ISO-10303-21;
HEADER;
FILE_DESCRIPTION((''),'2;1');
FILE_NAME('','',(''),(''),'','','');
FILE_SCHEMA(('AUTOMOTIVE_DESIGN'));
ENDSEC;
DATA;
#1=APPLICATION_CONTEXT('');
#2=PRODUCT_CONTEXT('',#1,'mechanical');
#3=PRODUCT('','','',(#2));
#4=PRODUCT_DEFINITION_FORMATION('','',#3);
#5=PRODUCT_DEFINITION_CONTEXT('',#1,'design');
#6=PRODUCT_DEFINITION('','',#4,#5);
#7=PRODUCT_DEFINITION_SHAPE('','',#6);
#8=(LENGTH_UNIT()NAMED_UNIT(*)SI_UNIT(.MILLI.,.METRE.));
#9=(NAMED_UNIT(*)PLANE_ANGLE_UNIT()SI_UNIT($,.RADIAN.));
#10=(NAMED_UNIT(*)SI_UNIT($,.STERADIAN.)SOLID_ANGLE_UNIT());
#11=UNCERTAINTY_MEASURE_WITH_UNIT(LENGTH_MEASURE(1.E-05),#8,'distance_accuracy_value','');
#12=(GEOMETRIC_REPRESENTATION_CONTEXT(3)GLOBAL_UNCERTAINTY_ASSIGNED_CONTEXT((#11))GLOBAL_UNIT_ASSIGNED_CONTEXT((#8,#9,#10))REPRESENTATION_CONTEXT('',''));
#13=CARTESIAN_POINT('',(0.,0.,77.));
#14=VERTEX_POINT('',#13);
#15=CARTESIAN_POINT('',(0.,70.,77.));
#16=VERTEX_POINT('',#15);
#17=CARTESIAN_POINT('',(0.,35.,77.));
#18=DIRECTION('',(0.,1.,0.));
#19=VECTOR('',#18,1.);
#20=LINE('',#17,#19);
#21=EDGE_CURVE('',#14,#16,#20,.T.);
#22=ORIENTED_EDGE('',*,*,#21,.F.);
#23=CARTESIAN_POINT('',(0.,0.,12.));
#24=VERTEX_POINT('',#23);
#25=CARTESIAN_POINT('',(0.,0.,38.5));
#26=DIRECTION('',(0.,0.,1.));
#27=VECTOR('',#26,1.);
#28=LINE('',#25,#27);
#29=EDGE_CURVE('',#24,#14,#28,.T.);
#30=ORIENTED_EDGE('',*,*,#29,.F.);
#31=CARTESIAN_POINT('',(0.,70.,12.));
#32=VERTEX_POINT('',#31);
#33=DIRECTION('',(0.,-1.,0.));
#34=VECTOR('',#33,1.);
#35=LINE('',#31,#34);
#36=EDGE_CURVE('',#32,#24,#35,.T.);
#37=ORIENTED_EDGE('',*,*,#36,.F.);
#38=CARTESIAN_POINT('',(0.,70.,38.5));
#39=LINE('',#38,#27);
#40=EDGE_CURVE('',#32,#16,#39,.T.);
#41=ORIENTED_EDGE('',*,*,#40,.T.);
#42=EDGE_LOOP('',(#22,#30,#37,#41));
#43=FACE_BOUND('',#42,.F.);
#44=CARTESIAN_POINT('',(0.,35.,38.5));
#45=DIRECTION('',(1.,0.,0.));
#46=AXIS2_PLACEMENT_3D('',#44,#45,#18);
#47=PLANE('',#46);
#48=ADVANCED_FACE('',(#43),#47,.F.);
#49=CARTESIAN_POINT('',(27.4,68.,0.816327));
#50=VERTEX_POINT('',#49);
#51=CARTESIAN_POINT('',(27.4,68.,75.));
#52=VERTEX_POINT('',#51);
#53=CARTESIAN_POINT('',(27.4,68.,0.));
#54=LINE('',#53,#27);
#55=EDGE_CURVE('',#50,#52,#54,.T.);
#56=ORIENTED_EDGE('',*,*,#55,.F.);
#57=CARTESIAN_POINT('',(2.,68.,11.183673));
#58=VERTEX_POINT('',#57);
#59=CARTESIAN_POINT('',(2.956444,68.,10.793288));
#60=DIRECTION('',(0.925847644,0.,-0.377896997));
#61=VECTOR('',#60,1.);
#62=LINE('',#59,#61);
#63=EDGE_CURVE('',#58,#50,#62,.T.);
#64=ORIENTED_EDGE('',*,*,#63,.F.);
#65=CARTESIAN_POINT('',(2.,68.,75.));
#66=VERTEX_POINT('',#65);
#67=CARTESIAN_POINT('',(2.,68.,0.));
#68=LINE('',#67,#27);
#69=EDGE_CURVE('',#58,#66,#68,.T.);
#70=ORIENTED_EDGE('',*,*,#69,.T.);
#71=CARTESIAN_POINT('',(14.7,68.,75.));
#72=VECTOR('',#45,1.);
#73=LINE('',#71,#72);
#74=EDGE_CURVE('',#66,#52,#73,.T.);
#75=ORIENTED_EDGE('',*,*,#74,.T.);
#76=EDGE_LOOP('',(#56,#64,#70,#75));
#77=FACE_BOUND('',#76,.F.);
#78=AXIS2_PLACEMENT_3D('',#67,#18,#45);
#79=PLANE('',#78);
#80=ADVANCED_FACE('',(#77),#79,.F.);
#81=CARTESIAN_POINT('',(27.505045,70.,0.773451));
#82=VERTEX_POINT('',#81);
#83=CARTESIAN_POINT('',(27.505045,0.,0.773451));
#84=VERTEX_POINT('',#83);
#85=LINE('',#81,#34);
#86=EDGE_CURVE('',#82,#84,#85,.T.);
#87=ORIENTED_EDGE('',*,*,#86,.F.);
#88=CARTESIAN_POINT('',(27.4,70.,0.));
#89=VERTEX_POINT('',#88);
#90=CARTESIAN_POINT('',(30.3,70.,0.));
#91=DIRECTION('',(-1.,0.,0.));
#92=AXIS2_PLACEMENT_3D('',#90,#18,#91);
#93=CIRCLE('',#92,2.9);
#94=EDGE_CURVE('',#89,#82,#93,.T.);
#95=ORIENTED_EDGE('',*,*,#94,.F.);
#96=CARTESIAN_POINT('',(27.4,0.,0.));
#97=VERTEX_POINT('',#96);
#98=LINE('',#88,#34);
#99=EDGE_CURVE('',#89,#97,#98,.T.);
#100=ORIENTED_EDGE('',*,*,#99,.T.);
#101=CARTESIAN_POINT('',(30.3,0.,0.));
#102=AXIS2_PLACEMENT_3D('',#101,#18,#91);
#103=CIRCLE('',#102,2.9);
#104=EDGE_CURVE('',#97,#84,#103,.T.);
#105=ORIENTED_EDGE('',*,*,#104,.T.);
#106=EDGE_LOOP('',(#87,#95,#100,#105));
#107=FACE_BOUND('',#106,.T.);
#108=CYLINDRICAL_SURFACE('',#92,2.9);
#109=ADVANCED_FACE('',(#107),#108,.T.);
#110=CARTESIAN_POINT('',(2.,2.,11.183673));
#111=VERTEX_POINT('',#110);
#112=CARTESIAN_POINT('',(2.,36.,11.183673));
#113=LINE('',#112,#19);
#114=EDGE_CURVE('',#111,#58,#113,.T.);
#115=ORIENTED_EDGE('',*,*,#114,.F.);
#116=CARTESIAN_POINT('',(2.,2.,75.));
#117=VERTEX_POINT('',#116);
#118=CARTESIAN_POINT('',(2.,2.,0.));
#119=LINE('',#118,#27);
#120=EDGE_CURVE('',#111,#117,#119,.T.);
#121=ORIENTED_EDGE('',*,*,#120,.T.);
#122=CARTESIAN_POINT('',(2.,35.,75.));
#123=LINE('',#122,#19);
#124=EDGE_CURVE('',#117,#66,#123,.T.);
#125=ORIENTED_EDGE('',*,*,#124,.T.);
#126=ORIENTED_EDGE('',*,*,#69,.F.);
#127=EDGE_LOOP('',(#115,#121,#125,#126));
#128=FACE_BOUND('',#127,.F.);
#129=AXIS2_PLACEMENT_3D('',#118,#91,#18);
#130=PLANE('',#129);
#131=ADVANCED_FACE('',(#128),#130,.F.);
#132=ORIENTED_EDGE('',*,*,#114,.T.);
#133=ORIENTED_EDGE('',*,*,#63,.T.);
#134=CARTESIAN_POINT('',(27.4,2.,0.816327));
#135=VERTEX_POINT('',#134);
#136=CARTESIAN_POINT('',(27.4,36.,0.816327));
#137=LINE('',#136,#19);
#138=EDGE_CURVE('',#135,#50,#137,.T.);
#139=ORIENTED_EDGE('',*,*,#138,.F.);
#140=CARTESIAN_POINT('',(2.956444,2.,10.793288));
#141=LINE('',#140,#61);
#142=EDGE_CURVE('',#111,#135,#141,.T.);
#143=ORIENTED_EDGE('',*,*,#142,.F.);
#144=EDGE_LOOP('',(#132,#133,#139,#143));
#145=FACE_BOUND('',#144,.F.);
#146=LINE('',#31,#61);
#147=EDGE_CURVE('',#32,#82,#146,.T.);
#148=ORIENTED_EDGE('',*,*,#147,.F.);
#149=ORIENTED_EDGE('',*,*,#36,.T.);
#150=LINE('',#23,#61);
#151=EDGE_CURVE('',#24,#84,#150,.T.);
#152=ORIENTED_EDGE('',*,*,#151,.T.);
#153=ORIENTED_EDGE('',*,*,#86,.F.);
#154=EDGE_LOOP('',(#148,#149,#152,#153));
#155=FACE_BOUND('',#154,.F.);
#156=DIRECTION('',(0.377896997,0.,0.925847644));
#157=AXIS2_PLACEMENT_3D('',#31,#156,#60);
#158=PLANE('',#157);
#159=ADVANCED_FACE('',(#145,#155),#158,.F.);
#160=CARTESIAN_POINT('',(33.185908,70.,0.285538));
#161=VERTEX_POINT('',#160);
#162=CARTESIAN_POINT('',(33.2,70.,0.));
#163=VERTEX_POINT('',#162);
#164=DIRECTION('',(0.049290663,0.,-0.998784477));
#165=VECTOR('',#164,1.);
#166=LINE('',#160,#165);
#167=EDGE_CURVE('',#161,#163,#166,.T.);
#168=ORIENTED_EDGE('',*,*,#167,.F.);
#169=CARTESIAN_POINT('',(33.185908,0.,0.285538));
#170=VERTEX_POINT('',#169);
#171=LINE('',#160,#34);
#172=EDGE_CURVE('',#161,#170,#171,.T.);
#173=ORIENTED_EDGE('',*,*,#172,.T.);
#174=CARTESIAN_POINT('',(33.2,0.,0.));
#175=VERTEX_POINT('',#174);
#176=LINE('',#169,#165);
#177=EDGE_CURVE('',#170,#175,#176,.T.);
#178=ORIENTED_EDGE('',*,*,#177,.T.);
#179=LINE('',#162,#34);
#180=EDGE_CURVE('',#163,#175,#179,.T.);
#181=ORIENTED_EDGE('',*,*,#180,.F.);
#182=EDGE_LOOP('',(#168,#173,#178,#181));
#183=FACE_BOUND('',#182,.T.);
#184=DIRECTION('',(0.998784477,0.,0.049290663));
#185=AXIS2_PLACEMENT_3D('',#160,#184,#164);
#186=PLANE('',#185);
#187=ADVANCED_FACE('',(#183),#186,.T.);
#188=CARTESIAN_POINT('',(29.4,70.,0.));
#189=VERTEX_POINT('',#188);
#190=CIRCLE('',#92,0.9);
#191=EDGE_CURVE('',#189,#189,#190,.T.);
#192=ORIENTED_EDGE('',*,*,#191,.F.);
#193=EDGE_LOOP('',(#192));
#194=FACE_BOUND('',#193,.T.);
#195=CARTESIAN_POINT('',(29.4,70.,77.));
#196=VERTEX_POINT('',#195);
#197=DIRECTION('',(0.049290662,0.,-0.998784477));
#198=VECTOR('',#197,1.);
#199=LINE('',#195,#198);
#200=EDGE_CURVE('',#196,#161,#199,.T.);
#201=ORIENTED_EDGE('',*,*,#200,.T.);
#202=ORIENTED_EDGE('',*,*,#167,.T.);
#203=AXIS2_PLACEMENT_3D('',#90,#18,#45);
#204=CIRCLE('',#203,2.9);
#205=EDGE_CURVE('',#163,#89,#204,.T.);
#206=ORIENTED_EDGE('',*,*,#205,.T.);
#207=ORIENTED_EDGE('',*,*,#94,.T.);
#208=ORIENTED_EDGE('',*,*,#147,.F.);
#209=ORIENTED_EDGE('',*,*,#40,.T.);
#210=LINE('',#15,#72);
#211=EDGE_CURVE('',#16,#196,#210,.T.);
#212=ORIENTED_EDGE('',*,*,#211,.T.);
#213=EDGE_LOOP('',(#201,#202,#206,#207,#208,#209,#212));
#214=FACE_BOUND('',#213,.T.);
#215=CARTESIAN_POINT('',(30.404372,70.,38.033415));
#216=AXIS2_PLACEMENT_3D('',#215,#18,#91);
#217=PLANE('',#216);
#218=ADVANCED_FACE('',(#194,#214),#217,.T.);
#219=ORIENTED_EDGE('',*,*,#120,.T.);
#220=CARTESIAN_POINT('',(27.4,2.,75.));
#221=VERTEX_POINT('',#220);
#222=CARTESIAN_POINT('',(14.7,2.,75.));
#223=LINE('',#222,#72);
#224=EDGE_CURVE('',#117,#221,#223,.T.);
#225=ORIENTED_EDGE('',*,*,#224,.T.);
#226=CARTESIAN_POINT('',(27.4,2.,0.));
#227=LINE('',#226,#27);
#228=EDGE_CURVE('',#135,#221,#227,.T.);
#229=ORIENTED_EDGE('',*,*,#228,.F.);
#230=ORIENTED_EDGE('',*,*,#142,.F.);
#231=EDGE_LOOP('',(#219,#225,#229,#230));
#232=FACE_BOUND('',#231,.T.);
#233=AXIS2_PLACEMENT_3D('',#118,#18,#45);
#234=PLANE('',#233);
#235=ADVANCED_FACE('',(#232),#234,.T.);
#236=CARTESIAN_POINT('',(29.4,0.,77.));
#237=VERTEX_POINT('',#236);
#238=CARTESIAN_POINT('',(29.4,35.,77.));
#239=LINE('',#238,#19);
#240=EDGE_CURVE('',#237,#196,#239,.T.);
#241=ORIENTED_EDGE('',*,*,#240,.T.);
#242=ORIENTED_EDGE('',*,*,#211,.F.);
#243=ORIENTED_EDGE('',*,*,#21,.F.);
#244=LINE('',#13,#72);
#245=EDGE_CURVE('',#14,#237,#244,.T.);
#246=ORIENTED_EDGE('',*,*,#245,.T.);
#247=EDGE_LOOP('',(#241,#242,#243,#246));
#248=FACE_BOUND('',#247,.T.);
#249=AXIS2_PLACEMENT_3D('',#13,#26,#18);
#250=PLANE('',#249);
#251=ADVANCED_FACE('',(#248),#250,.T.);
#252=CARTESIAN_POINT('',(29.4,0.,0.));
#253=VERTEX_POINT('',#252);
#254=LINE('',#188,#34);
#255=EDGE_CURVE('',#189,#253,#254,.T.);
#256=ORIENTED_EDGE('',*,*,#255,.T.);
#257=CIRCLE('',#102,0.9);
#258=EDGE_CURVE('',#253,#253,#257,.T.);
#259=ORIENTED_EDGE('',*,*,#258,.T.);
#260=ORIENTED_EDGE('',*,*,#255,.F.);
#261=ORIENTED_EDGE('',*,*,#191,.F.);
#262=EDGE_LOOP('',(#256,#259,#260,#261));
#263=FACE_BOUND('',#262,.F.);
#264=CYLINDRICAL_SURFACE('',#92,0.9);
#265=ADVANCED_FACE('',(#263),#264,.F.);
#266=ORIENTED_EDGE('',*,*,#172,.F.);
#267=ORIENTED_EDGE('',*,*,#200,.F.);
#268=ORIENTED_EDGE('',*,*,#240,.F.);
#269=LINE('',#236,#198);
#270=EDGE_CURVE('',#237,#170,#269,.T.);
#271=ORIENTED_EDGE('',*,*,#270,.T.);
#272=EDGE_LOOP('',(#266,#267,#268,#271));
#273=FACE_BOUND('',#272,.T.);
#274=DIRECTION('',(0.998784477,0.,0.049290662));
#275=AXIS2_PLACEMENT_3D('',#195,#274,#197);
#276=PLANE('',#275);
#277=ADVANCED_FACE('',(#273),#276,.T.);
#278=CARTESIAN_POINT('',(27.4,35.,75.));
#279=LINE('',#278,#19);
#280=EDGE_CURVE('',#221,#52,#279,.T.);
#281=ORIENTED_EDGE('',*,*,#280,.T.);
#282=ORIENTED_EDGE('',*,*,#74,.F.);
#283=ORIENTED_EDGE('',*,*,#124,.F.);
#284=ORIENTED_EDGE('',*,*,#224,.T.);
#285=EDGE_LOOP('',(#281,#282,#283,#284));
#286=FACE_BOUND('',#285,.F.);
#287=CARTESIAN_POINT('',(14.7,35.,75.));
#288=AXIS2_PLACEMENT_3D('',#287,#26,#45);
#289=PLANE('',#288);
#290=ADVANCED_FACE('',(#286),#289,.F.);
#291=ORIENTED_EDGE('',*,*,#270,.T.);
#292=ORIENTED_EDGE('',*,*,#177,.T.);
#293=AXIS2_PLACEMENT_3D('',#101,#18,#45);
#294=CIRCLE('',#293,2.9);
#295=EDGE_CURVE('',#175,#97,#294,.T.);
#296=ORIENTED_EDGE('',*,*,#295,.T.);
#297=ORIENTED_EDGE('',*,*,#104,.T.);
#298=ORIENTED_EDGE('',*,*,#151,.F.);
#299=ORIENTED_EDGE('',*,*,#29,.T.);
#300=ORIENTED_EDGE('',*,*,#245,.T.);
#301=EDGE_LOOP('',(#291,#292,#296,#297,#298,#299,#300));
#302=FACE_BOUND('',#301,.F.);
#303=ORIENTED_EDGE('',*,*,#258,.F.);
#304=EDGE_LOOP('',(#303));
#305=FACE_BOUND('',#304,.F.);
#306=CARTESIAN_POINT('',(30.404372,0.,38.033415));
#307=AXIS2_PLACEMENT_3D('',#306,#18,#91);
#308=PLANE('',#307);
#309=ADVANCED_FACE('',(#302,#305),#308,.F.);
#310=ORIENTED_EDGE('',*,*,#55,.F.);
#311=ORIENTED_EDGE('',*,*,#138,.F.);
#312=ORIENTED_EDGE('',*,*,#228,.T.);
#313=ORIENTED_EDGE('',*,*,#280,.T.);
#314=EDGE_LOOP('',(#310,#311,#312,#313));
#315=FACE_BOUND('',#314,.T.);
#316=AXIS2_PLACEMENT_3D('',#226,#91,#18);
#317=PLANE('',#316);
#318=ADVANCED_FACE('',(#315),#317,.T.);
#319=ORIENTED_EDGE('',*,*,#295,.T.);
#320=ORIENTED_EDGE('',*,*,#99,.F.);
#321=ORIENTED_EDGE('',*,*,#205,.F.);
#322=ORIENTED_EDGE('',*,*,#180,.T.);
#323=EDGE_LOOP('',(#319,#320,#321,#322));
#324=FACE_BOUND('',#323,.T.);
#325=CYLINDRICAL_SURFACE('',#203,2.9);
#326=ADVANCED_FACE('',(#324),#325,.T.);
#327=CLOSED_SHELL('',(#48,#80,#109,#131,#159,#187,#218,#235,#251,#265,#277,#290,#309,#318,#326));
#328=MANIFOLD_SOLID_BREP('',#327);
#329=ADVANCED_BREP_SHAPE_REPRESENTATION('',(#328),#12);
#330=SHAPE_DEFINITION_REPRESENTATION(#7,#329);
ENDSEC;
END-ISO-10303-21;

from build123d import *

# Parameters (mm, degrees)
F0_W     = 70
F0_H     = 77
F1_DEPTH = 29.4
F2_W     = 25.4
F2_H     = 66
F3_DEPTH = 75
F5_DEPTH = 70
F6_R     = 0.9
F7_DEPTH = 70
F8_DEPTH = 70


with BuildPart() as f1:
    # F0 (on Right) → F1 (new body)
    with BuildSketch(Plane.YZ):
        with Locations((35, 38.5)):
            Rectangle(F0_W, F0_H)
    extrude(amount=F1_DEPTH)

    # F2 (on Top) → F3 (cut)
    with BuildSketch(Plane.XY):
        with Locations((14.7, 35)):
            Rectangle(F2_W, F2_H)
    extrude(amount=F3_DEPTH, mode=Mode.SUBTRACT)

    # F4 (on face) → F5 (cut, through all)
    with BuildSketch(Plane(origin=(0, 70, 0), x_dir=(-1, 0, 0), z_dir=(0, 1, 0))):
        Polygon((0, 0), (0, 12), (-29.4, 0), align=None)
    extrude(amount=-F5_DEPTH, mode=Mode.SUBTRACT)

    # F6 (on face) → F7 (join)
    with BuildSketch(Plane(origin=(0, 70, 0), x_dir=(-1, 0, 0), z_dir=(0, 1, 0))):
        with BuildLine():
            ThreePointArc((-33.1859084974, 0.2855383414), (-31.8851667844, 2.4284246469), (-29.4, 2.7568097504))
            Line((-29.4, 2.7568097504), (-29.4, 77))
            Line((-29.4, 77), (-33.1859084974, 0.2855383414))
        make_face()
        with BuildLine():
            Line((-27.5050449892, 0.7734510248), (-29.4, 0))
            Line((-29.4, 0), (-29.4, 2.7568097504))
            ThreePointArc((-29.4, 2.7568097504), (-31.8851667844, 2.4284246469), (-33.1859084974, 0.2855383414))
            Line((-33.1859084974, 0.2855383414), (-33.2, 0))
            ThreePointArc((-33.2, 0), (-30.3, -2.9), (-27.4, 0))
            ThreePointArc((-27.4, 0), (-27.4263812421, 0.390275844), (-27.5050449892, 0.7734510248))
        make_face()
        with Locations((-30.3, 0)):
            Circle(F6_R, mode=Mode.SUBTRACT)
        with Locations((-30.3, 0)):
            Circle(F6_R)
    extrude(amount=-F7_DEPTH)

    # F6 (on face) → F8 (cut, through all)
    with BuildSketch(Plane(origin=(0, 70, 0), x_dir=(-1, 0, 0), z_dir=(0, 1, 0))):
        with Locations((-30.3, 0)):
            Circle(F6_R)
    extrude(amount=-F8_DEPTH, mode=Mode.SUBTRACT)


solid = f1.part
